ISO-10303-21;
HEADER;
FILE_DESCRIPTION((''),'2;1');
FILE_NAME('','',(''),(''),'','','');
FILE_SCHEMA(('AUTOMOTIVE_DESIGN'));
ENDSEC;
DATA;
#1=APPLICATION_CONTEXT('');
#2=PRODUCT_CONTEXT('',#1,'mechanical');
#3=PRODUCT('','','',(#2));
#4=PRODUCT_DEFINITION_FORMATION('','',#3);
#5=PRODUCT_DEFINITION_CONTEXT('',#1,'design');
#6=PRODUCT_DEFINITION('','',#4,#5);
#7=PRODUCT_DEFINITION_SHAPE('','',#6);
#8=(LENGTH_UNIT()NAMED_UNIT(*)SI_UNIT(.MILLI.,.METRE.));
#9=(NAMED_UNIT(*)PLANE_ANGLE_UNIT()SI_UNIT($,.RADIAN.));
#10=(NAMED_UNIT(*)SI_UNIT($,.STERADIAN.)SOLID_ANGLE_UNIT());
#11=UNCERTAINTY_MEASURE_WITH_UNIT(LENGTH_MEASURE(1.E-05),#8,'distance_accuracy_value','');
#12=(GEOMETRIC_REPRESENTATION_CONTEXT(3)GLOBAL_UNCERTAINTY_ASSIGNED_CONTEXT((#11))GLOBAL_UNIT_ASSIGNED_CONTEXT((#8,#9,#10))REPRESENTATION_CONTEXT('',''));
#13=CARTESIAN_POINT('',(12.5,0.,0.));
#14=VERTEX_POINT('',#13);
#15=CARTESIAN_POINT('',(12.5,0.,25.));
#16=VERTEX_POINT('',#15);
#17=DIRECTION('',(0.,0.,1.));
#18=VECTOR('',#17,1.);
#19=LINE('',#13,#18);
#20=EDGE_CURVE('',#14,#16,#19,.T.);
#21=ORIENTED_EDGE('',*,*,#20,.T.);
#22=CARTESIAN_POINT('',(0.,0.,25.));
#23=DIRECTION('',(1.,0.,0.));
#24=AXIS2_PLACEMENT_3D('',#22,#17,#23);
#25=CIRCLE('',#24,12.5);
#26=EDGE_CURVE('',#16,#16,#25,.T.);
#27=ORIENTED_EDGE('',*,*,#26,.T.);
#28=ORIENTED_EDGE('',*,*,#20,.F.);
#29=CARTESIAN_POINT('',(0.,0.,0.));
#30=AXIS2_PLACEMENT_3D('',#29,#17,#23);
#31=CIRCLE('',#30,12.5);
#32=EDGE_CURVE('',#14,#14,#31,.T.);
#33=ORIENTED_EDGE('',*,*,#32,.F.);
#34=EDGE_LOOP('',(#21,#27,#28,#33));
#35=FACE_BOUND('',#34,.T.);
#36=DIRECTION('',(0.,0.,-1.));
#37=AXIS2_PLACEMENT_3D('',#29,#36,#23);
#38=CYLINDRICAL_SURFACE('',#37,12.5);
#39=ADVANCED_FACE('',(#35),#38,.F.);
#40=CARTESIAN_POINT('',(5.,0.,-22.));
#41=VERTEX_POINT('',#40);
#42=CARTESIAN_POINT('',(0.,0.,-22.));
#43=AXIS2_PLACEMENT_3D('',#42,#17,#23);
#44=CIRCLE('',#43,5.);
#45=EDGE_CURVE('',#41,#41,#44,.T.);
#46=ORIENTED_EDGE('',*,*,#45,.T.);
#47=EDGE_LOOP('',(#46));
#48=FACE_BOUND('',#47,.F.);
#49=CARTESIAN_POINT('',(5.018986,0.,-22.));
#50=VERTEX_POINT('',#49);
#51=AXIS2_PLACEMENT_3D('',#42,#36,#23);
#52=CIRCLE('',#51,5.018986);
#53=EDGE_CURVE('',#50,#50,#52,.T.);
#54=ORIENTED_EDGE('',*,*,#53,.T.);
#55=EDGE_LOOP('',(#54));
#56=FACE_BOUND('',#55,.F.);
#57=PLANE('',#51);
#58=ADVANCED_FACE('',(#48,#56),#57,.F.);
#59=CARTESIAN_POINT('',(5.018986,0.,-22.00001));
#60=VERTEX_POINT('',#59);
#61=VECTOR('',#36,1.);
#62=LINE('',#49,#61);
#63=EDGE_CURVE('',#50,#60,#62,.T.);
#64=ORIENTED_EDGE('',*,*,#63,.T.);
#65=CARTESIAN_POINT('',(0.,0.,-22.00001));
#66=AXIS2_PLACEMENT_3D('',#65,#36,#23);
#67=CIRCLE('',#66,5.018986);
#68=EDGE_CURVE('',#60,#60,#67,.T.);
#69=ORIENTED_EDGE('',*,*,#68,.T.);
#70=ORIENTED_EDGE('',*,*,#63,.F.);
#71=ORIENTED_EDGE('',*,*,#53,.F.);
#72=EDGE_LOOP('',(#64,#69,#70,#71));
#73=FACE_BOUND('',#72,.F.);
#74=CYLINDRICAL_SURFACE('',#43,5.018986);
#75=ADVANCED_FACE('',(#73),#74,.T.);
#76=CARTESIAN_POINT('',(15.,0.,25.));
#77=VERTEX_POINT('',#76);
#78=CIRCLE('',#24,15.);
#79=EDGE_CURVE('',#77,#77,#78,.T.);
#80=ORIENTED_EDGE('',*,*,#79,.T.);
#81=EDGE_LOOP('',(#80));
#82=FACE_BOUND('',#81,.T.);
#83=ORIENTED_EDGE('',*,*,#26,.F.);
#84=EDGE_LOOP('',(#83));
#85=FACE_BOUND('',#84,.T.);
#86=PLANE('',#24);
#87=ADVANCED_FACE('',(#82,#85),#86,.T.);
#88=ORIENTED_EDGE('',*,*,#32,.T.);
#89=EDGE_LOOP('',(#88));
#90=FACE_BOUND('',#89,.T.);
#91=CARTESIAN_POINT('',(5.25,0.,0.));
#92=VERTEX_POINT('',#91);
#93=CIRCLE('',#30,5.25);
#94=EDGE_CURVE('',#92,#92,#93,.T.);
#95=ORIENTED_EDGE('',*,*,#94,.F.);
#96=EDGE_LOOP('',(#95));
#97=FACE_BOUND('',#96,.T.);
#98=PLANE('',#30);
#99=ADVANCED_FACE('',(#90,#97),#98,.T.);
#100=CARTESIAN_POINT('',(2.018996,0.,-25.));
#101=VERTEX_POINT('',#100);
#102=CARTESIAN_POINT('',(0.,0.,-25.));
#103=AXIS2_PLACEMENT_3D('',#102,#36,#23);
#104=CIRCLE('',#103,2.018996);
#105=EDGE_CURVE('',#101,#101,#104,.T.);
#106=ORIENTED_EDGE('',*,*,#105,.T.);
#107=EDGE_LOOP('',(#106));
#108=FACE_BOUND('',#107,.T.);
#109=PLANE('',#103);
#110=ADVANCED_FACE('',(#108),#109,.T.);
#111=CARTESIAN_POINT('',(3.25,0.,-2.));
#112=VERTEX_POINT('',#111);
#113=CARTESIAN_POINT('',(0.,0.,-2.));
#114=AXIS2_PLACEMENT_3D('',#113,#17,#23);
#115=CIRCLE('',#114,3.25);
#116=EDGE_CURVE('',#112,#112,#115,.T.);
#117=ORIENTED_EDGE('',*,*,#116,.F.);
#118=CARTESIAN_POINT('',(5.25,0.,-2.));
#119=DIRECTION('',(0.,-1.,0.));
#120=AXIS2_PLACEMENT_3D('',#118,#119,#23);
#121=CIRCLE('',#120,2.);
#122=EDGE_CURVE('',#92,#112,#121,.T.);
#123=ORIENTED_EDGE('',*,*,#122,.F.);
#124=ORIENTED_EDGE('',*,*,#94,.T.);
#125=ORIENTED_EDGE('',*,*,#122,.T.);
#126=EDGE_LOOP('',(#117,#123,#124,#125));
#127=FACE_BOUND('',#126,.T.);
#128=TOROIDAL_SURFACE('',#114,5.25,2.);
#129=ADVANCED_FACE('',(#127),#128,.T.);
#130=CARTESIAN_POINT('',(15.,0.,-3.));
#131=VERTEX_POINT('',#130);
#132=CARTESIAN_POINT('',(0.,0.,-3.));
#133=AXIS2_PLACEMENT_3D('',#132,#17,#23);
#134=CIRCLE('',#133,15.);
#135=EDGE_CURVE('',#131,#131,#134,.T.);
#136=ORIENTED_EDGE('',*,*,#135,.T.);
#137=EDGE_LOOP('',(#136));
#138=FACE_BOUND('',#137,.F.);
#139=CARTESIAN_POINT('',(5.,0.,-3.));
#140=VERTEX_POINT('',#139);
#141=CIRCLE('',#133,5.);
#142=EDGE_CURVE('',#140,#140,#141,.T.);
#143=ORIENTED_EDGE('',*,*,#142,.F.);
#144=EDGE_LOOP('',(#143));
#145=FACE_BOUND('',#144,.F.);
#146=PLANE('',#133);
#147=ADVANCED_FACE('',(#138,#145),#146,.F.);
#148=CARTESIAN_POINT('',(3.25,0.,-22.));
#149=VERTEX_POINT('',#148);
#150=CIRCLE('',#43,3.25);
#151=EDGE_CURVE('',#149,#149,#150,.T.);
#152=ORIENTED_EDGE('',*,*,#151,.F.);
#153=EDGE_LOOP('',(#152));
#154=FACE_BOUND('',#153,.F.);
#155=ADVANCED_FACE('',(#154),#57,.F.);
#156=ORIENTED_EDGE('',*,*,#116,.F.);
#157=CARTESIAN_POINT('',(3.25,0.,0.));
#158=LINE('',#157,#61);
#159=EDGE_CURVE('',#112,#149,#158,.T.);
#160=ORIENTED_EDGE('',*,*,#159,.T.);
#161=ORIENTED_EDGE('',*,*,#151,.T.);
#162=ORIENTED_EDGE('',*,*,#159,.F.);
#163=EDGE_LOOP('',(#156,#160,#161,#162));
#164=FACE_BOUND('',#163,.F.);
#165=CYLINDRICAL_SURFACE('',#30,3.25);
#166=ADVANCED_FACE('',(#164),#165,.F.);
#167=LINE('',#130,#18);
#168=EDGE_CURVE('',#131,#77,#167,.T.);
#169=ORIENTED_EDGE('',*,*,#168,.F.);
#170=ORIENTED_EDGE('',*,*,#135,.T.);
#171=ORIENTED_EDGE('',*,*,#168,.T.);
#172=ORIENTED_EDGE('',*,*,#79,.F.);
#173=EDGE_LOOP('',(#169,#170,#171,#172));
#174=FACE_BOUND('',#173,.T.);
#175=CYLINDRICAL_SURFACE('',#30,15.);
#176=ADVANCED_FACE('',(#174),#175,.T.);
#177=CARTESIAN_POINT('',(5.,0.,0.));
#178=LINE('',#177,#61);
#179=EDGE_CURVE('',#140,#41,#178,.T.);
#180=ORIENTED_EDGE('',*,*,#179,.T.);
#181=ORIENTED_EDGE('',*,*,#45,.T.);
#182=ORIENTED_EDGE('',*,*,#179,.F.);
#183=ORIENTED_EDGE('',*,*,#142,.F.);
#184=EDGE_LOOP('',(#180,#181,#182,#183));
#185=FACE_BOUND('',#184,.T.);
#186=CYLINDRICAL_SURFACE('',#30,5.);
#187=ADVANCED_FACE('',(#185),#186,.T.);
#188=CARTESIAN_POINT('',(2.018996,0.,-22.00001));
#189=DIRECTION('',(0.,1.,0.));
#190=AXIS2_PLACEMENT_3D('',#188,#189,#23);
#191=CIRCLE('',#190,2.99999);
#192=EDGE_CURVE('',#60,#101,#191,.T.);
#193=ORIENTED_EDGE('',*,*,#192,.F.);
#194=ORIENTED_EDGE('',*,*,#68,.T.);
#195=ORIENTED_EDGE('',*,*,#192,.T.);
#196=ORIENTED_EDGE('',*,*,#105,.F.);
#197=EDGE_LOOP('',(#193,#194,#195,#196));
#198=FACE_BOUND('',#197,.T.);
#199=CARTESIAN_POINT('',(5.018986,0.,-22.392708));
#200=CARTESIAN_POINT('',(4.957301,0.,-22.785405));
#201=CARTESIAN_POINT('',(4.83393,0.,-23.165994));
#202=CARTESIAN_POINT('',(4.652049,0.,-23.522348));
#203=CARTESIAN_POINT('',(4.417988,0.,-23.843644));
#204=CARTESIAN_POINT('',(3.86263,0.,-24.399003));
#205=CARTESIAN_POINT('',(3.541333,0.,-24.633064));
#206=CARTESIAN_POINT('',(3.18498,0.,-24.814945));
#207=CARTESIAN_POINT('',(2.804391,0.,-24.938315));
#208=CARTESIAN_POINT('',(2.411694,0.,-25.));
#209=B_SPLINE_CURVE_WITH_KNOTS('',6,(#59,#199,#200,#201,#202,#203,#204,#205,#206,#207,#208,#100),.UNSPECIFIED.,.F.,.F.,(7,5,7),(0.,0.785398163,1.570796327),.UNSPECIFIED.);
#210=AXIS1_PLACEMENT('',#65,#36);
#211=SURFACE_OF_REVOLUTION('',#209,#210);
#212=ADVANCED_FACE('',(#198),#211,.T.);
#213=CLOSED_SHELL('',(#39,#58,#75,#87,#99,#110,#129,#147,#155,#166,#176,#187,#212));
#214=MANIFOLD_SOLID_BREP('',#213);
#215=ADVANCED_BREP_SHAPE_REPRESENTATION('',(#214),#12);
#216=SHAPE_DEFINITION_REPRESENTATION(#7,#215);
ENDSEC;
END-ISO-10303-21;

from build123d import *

# Parameters (mm, degrees)
F0_R     = 15
F0_R_2   = 12.5
F7_DEPTH = 25
F0_R_3   = 5
F1_DEPTH = 3
F0_R_4   = 3.25
F2_DEPTH = 22
F3_R     = 5.0189857481
F4_DEPTH = 3
F5_R     = 2.99999
F6_R     = 2


# Not quite as in the source:
# - a fillet or chamfer is up to 0.001 mm smaller than in the source, because OpenCascade refuses the exact size


with BuildPart() as f7:
    # F0 (on Top) → F7 (new body)
    with BuildSketch(Plane.XY):
        Circle(F0_R)
        Circle(F0_R_2, mode=Mode.SUBTRACT)
    extrude(amount=F7_DEPTH)

    # F0 (on Top) → F1 (join)
    with BuildSketch(Plane.XY):
        Circle(F0_R)
        Circle(F0_R_2, mode=Mode.SUBTRACT)
        Circle(F0_R_2)
        Circle(F0_R_3, mode=Mode.SUBTRACT)
    extrude(amount=-F1_DEPTH)

    # F0 (on Top) → F2 (join)
    with BuildSketch(Plane.XY):
        Circle(F0_R_3)
        Circle(F0_R_4, mode=Mode.SUBTRACT)
    extrude(amount=-F2_DEPTH)

    # F3 (on face) → F4 (join)
    with BuildSketch(Plane(origin=(0, 0, -22), x_dir=(1, 0, 0), z_dir=(0, 0, -1))):
        Circle(F3_R)
    extrude(amount=F4_DEPTH)

    # F5 (radius 3 in the source; OpenCascade refuses exactly that, so slightly less here)
    f5_edges = [f7.edges().sort_by_distance(p)[0] for p in [
        (-5.018986, 0, -25),
    ]]
    fillet(f5_edges, radius=F5_R)

    # F6
    f6_edges = [f7.edges().sort_by_distance(p)[0] for p in [
        (-3.25, 0, 0),
    ]]
    fillet(f6_edges, radius=F6_R)


solid = f7.part
